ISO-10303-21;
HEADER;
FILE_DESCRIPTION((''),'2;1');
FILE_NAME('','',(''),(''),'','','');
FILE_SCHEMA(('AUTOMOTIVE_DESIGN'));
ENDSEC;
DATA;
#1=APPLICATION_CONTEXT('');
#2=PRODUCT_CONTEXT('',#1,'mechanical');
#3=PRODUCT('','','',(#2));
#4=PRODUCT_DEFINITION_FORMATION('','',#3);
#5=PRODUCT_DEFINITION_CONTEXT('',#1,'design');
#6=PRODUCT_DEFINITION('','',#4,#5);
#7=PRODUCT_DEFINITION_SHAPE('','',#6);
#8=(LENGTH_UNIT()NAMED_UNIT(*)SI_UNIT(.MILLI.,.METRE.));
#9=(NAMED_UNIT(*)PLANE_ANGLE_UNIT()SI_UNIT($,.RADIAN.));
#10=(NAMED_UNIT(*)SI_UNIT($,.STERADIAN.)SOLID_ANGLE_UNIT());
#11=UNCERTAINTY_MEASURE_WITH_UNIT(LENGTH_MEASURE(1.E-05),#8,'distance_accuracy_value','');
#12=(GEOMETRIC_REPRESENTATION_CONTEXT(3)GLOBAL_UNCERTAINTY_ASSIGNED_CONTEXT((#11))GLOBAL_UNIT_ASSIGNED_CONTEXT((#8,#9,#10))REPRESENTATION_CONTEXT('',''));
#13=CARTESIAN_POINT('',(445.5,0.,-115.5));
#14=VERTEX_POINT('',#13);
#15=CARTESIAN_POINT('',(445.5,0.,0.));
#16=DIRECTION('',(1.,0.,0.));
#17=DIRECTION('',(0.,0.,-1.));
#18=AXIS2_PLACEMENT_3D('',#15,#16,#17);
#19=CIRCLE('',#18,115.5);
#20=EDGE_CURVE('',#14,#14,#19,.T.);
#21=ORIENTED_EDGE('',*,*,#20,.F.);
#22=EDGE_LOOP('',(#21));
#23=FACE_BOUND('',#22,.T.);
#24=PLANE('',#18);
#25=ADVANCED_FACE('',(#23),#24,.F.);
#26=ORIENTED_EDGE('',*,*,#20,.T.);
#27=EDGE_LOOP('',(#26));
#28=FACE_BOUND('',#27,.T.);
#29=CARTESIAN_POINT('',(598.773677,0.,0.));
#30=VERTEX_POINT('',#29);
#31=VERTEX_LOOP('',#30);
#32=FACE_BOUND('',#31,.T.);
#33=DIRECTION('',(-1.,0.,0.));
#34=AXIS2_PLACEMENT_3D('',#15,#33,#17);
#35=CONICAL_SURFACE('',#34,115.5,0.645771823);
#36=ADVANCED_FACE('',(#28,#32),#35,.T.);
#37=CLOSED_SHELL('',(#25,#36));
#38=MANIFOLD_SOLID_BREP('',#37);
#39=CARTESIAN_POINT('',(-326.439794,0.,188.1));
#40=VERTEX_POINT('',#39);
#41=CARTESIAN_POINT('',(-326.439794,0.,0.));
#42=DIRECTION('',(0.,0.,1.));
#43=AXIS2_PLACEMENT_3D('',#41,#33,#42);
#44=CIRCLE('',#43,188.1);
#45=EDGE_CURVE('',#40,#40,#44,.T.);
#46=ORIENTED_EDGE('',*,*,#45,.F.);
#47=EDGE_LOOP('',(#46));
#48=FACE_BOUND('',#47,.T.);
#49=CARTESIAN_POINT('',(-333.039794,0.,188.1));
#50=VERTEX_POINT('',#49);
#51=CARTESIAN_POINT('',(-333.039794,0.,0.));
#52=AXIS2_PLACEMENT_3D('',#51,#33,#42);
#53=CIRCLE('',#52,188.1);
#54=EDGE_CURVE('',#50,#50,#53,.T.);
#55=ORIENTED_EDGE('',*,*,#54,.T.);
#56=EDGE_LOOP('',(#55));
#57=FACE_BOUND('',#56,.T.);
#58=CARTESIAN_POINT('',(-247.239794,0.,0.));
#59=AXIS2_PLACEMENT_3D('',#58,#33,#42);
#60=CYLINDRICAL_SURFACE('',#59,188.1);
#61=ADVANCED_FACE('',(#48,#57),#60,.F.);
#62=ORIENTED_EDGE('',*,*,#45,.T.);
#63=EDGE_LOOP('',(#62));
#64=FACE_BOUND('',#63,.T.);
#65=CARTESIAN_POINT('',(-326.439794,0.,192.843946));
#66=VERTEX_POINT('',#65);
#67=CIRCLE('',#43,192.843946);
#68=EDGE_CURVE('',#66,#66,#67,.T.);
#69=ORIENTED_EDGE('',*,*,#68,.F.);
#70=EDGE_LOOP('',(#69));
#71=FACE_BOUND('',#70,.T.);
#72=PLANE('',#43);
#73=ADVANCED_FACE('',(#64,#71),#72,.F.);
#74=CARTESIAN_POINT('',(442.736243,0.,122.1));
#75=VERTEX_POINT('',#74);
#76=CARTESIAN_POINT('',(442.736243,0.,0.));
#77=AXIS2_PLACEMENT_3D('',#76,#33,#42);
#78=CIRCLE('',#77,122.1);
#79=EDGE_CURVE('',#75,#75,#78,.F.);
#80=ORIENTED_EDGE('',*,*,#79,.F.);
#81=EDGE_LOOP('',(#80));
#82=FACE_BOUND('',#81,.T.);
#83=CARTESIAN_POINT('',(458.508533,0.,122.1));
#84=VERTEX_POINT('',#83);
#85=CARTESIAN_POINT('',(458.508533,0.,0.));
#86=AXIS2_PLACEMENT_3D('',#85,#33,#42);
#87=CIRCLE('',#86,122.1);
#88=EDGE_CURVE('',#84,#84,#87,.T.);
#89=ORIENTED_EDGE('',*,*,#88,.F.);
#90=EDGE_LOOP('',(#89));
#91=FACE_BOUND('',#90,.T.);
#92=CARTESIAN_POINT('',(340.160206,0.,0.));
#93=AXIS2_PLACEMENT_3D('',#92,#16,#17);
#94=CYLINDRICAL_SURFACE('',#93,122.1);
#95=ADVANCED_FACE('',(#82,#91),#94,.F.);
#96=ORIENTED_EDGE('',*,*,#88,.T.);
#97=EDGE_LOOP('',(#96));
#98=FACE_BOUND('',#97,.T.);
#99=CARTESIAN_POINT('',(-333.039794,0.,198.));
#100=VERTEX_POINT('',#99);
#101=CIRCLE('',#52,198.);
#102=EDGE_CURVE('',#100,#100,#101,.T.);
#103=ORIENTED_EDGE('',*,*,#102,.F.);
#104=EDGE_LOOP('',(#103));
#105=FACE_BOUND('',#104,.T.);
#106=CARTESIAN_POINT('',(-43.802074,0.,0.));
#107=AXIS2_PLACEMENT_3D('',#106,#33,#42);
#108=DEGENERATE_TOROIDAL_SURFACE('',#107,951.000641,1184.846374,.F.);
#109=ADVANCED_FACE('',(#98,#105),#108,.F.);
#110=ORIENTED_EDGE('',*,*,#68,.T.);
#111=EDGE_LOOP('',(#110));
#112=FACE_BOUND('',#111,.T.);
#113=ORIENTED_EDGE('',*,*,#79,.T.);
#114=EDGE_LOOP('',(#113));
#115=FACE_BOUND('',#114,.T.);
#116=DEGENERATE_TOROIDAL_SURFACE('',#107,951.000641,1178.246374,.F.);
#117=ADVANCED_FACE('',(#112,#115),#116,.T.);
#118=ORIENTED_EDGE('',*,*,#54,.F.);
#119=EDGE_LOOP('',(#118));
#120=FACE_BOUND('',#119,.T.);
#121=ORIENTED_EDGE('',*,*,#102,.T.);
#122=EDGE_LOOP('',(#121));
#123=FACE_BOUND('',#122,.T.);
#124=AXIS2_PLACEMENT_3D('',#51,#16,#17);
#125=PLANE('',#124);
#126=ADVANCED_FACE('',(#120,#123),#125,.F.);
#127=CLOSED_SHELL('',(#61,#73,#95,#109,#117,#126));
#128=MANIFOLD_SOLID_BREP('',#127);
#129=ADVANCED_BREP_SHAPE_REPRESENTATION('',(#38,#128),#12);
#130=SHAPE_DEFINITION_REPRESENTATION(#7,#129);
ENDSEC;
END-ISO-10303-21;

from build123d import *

# Parameters (mm, degrees)
SKETCH2_R          = 57
CUT_EXTRUDE1_DEPTH = 26
SKETCH3_R          = 37
CUT_EXTRUDE2_DEPTH = 50
SCALE1_SCALE       = 3.3


with BuildPart() as part:
    # Sketch1 → Revolve1 (revolve)
    with BuildSketch(Plane(origin=(0, 0, 0), x_dir=(1, 0, 0), z_dir=(0, 1, 0))):
        with BuildLine():
            Line((-100.921149604, 0), (-100.921149604, 60))
            ThreePointArc((-100.921149604, 60), (28.840728929, 68.383904914), (153.078850396, 30))
            Line((153.078850396, 30), (153.078850396, 0))
            Line((153.078850396, 0), (151.078850396, 0))
            Line((151.078850396, 0), (151.078850396, 28.786478804))
            ThreePointArc((151.078850396, 28.786478804), (28.778906645, 66.377262366), (-98.921149604, 58.437559336))
            Line((-98.921149604, 58.437559336), (-98.921149604, 0))
            Line((-98.921149604, 0), (-100.921149604, 0))
        make_face()
    revolve(axis=Axis((151.078850396, 0, 0), (1, 0, 0)))

    # Sketch2 → Cut-Extrude1 (cut)
    with BuildSketch(Plane.ZY.offset(100.921149604)):
        Circle(SKETCH2_R)
    extrude(amount=-CUT_EXTRUDE1_DEPTH, mode=Mode.SUBTRACT)

    # Sketch3 → Cut-Extrude2 (cut)
    with BuildSketch(Plane(origin=(153.078850396, 0, 0), x_dir=(0, 0, -1), z_dir=(1, 0, 0))):
        Circle(SKETCH3_R)
    extrude(amount=-CUT_EXTRUDE2_DEPTH, mode=Mode.SUBTRACT)


with BuildPart() as body_2:
    # Boss-Extrude1 cone 1 section (through the dimple's axis) → Boss-Extrude1 (revolve)
    with BuildSketch(Plane(origin=(135, 0, 0), x_dir=(0, 0, 1), z_dir=(0, 1, 0))):
        Polygon((0, 0), (35, 0), (0, 46.446568757), align=None)
    revolve(axis=Axis((135, 0, 0), (1, 0, 0)))


with BuildPart() as body_2_1:
    # Scale1: scaled about (0, 0, 0)
    add(body_2.part.scale(SCALE1_SCALE))


with BuildPart() as part_1:
    # Scale1: scaled about (0, 0, 0)
    add(part.part.scale(SCALE1_SCALE))


solid = Compound([body_2_1.part, part_1.part])
